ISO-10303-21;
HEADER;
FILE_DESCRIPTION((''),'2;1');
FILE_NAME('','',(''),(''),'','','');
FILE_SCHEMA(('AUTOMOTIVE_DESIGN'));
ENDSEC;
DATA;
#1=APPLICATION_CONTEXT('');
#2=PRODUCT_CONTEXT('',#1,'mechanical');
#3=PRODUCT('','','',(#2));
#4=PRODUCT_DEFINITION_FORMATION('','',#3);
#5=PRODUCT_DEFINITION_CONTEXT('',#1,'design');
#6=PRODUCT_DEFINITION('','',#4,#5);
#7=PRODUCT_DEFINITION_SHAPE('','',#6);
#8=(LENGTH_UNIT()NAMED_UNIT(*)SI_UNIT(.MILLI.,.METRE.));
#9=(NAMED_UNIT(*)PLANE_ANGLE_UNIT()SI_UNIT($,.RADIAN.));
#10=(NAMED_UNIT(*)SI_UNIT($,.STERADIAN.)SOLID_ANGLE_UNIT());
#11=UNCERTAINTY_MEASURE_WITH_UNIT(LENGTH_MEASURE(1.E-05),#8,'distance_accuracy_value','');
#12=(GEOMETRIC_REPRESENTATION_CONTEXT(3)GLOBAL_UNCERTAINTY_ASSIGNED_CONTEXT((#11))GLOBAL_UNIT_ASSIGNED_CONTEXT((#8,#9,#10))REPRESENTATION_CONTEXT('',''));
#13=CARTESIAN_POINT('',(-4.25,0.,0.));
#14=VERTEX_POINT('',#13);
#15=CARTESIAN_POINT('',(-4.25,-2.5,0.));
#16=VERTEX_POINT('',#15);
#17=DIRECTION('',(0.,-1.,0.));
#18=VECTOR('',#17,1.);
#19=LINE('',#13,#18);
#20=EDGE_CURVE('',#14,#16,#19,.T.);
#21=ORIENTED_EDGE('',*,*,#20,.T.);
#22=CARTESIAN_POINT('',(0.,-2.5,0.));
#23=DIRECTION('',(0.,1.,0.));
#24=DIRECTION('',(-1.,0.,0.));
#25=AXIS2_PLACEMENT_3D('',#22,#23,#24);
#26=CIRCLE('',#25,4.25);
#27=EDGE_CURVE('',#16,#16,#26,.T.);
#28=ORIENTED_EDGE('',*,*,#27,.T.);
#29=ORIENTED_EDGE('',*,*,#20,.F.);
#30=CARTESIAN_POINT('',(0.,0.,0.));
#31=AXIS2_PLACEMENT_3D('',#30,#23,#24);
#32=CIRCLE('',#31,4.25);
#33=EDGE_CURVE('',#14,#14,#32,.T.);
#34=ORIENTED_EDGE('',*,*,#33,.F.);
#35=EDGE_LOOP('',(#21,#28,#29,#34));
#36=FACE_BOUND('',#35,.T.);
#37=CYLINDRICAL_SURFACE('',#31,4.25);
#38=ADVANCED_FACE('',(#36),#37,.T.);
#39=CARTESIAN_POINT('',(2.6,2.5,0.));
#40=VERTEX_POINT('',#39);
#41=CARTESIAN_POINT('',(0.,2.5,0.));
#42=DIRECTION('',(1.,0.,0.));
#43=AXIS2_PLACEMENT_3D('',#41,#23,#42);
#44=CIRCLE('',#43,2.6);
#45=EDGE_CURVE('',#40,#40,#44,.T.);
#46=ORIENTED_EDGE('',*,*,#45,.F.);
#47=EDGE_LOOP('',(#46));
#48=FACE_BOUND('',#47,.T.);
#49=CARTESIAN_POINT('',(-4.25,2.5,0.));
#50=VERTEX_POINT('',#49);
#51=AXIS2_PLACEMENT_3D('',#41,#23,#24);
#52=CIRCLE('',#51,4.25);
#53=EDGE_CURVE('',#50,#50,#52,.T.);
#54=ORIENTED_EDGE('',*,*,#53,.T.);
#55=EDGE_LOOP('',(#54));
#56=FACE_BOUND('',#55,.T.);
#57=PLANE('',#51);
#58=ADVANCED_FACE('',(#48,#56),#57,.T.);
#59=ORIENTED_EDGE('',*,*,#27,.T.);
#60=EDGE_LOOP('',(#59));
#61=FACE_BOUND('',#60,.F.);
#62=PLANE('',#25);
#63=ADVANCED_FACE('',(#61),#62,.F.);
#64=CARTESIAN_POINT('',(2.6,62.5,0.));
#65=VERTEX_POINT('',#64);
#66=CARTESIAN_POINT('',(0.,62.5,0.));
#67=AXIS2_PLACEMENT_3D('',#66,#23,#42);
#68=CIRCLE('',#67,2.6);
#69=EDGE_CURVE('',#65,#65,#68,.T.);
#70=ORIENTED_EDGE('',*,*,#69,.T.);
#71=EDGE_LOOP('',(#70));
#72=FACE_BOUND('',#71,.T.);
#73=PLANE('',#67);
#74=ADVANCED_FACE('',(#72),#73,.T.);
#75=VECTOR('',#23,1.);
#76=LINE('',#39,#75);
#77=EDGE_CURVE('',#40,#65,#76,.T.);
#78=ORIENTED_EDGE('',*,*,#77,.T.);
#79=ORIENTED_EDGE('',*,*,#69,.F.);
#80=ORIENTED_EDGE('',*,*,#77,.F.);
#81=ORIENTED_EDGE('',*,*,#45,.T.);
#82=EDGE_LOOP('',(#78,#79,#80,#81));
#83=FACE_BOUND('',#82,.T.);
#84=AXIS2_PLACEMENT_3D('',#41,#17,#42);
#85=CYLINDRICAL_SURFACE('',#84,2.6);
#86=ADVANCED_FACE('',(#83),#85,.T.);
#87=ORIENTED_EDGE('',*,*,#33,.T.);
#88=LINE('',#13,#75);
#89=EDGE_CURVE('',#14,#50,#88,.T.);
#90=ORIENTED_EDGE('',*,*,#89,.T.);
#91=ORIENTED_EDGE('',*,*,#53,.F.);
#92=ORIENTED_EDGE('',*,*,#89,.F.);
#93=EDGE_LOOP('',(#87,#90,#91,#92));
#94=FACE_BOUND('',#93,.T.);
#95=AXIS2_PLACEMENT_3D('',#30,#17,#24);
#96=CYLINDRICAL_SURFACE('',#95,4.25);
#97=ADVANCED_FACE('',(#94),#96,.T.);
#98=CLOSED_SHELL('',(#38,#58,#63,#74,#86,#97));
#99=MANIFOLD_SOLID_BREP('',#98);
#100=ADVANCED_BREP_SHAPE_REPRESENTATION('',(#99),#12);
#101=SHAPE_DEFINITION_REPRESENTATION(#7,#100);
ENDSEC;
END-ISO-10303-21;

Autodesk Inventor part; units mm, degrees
ref_plane "YZ Plane" through (0, 0, 0) normal (1, 0, 0) x (0, 1, 0)
ref_plane "XZ Plane" through (0, 0, 0) normal (0, 1, 0) x (-1, 0, 0)
ref_plane "XY Plane" through (0, 0, 0) normal (0, 0, 1) x (1, 0, 0)
sketch "Szkic1" plane through (0, 0, 0) normal (0, 1, 0) x (-1, 0, 0)
  circle A0 centre (0, 0) radius 4.25
  dimension "d0" = 8.5
extrude "Wyciągnięcie proste1" add sketch "Szkic1" along normal mid plane 5
sketch "Szkic2" plane through (0, 2.5, 0) normal (0, 1, 0) x (1, 0, 0)
  circle A0 centre (0, 0) radius 2.6
  dimension "d3" = 5.2
extrude "Wyciągnięcie proste2" add sketch "Szkic2" along normal blind 60
thread "Gwint1" size "M5.5x0.5" class "6g" standard "ANSI Metric M Profile" length 25
properties part number "sworzen_2_pomysl"
